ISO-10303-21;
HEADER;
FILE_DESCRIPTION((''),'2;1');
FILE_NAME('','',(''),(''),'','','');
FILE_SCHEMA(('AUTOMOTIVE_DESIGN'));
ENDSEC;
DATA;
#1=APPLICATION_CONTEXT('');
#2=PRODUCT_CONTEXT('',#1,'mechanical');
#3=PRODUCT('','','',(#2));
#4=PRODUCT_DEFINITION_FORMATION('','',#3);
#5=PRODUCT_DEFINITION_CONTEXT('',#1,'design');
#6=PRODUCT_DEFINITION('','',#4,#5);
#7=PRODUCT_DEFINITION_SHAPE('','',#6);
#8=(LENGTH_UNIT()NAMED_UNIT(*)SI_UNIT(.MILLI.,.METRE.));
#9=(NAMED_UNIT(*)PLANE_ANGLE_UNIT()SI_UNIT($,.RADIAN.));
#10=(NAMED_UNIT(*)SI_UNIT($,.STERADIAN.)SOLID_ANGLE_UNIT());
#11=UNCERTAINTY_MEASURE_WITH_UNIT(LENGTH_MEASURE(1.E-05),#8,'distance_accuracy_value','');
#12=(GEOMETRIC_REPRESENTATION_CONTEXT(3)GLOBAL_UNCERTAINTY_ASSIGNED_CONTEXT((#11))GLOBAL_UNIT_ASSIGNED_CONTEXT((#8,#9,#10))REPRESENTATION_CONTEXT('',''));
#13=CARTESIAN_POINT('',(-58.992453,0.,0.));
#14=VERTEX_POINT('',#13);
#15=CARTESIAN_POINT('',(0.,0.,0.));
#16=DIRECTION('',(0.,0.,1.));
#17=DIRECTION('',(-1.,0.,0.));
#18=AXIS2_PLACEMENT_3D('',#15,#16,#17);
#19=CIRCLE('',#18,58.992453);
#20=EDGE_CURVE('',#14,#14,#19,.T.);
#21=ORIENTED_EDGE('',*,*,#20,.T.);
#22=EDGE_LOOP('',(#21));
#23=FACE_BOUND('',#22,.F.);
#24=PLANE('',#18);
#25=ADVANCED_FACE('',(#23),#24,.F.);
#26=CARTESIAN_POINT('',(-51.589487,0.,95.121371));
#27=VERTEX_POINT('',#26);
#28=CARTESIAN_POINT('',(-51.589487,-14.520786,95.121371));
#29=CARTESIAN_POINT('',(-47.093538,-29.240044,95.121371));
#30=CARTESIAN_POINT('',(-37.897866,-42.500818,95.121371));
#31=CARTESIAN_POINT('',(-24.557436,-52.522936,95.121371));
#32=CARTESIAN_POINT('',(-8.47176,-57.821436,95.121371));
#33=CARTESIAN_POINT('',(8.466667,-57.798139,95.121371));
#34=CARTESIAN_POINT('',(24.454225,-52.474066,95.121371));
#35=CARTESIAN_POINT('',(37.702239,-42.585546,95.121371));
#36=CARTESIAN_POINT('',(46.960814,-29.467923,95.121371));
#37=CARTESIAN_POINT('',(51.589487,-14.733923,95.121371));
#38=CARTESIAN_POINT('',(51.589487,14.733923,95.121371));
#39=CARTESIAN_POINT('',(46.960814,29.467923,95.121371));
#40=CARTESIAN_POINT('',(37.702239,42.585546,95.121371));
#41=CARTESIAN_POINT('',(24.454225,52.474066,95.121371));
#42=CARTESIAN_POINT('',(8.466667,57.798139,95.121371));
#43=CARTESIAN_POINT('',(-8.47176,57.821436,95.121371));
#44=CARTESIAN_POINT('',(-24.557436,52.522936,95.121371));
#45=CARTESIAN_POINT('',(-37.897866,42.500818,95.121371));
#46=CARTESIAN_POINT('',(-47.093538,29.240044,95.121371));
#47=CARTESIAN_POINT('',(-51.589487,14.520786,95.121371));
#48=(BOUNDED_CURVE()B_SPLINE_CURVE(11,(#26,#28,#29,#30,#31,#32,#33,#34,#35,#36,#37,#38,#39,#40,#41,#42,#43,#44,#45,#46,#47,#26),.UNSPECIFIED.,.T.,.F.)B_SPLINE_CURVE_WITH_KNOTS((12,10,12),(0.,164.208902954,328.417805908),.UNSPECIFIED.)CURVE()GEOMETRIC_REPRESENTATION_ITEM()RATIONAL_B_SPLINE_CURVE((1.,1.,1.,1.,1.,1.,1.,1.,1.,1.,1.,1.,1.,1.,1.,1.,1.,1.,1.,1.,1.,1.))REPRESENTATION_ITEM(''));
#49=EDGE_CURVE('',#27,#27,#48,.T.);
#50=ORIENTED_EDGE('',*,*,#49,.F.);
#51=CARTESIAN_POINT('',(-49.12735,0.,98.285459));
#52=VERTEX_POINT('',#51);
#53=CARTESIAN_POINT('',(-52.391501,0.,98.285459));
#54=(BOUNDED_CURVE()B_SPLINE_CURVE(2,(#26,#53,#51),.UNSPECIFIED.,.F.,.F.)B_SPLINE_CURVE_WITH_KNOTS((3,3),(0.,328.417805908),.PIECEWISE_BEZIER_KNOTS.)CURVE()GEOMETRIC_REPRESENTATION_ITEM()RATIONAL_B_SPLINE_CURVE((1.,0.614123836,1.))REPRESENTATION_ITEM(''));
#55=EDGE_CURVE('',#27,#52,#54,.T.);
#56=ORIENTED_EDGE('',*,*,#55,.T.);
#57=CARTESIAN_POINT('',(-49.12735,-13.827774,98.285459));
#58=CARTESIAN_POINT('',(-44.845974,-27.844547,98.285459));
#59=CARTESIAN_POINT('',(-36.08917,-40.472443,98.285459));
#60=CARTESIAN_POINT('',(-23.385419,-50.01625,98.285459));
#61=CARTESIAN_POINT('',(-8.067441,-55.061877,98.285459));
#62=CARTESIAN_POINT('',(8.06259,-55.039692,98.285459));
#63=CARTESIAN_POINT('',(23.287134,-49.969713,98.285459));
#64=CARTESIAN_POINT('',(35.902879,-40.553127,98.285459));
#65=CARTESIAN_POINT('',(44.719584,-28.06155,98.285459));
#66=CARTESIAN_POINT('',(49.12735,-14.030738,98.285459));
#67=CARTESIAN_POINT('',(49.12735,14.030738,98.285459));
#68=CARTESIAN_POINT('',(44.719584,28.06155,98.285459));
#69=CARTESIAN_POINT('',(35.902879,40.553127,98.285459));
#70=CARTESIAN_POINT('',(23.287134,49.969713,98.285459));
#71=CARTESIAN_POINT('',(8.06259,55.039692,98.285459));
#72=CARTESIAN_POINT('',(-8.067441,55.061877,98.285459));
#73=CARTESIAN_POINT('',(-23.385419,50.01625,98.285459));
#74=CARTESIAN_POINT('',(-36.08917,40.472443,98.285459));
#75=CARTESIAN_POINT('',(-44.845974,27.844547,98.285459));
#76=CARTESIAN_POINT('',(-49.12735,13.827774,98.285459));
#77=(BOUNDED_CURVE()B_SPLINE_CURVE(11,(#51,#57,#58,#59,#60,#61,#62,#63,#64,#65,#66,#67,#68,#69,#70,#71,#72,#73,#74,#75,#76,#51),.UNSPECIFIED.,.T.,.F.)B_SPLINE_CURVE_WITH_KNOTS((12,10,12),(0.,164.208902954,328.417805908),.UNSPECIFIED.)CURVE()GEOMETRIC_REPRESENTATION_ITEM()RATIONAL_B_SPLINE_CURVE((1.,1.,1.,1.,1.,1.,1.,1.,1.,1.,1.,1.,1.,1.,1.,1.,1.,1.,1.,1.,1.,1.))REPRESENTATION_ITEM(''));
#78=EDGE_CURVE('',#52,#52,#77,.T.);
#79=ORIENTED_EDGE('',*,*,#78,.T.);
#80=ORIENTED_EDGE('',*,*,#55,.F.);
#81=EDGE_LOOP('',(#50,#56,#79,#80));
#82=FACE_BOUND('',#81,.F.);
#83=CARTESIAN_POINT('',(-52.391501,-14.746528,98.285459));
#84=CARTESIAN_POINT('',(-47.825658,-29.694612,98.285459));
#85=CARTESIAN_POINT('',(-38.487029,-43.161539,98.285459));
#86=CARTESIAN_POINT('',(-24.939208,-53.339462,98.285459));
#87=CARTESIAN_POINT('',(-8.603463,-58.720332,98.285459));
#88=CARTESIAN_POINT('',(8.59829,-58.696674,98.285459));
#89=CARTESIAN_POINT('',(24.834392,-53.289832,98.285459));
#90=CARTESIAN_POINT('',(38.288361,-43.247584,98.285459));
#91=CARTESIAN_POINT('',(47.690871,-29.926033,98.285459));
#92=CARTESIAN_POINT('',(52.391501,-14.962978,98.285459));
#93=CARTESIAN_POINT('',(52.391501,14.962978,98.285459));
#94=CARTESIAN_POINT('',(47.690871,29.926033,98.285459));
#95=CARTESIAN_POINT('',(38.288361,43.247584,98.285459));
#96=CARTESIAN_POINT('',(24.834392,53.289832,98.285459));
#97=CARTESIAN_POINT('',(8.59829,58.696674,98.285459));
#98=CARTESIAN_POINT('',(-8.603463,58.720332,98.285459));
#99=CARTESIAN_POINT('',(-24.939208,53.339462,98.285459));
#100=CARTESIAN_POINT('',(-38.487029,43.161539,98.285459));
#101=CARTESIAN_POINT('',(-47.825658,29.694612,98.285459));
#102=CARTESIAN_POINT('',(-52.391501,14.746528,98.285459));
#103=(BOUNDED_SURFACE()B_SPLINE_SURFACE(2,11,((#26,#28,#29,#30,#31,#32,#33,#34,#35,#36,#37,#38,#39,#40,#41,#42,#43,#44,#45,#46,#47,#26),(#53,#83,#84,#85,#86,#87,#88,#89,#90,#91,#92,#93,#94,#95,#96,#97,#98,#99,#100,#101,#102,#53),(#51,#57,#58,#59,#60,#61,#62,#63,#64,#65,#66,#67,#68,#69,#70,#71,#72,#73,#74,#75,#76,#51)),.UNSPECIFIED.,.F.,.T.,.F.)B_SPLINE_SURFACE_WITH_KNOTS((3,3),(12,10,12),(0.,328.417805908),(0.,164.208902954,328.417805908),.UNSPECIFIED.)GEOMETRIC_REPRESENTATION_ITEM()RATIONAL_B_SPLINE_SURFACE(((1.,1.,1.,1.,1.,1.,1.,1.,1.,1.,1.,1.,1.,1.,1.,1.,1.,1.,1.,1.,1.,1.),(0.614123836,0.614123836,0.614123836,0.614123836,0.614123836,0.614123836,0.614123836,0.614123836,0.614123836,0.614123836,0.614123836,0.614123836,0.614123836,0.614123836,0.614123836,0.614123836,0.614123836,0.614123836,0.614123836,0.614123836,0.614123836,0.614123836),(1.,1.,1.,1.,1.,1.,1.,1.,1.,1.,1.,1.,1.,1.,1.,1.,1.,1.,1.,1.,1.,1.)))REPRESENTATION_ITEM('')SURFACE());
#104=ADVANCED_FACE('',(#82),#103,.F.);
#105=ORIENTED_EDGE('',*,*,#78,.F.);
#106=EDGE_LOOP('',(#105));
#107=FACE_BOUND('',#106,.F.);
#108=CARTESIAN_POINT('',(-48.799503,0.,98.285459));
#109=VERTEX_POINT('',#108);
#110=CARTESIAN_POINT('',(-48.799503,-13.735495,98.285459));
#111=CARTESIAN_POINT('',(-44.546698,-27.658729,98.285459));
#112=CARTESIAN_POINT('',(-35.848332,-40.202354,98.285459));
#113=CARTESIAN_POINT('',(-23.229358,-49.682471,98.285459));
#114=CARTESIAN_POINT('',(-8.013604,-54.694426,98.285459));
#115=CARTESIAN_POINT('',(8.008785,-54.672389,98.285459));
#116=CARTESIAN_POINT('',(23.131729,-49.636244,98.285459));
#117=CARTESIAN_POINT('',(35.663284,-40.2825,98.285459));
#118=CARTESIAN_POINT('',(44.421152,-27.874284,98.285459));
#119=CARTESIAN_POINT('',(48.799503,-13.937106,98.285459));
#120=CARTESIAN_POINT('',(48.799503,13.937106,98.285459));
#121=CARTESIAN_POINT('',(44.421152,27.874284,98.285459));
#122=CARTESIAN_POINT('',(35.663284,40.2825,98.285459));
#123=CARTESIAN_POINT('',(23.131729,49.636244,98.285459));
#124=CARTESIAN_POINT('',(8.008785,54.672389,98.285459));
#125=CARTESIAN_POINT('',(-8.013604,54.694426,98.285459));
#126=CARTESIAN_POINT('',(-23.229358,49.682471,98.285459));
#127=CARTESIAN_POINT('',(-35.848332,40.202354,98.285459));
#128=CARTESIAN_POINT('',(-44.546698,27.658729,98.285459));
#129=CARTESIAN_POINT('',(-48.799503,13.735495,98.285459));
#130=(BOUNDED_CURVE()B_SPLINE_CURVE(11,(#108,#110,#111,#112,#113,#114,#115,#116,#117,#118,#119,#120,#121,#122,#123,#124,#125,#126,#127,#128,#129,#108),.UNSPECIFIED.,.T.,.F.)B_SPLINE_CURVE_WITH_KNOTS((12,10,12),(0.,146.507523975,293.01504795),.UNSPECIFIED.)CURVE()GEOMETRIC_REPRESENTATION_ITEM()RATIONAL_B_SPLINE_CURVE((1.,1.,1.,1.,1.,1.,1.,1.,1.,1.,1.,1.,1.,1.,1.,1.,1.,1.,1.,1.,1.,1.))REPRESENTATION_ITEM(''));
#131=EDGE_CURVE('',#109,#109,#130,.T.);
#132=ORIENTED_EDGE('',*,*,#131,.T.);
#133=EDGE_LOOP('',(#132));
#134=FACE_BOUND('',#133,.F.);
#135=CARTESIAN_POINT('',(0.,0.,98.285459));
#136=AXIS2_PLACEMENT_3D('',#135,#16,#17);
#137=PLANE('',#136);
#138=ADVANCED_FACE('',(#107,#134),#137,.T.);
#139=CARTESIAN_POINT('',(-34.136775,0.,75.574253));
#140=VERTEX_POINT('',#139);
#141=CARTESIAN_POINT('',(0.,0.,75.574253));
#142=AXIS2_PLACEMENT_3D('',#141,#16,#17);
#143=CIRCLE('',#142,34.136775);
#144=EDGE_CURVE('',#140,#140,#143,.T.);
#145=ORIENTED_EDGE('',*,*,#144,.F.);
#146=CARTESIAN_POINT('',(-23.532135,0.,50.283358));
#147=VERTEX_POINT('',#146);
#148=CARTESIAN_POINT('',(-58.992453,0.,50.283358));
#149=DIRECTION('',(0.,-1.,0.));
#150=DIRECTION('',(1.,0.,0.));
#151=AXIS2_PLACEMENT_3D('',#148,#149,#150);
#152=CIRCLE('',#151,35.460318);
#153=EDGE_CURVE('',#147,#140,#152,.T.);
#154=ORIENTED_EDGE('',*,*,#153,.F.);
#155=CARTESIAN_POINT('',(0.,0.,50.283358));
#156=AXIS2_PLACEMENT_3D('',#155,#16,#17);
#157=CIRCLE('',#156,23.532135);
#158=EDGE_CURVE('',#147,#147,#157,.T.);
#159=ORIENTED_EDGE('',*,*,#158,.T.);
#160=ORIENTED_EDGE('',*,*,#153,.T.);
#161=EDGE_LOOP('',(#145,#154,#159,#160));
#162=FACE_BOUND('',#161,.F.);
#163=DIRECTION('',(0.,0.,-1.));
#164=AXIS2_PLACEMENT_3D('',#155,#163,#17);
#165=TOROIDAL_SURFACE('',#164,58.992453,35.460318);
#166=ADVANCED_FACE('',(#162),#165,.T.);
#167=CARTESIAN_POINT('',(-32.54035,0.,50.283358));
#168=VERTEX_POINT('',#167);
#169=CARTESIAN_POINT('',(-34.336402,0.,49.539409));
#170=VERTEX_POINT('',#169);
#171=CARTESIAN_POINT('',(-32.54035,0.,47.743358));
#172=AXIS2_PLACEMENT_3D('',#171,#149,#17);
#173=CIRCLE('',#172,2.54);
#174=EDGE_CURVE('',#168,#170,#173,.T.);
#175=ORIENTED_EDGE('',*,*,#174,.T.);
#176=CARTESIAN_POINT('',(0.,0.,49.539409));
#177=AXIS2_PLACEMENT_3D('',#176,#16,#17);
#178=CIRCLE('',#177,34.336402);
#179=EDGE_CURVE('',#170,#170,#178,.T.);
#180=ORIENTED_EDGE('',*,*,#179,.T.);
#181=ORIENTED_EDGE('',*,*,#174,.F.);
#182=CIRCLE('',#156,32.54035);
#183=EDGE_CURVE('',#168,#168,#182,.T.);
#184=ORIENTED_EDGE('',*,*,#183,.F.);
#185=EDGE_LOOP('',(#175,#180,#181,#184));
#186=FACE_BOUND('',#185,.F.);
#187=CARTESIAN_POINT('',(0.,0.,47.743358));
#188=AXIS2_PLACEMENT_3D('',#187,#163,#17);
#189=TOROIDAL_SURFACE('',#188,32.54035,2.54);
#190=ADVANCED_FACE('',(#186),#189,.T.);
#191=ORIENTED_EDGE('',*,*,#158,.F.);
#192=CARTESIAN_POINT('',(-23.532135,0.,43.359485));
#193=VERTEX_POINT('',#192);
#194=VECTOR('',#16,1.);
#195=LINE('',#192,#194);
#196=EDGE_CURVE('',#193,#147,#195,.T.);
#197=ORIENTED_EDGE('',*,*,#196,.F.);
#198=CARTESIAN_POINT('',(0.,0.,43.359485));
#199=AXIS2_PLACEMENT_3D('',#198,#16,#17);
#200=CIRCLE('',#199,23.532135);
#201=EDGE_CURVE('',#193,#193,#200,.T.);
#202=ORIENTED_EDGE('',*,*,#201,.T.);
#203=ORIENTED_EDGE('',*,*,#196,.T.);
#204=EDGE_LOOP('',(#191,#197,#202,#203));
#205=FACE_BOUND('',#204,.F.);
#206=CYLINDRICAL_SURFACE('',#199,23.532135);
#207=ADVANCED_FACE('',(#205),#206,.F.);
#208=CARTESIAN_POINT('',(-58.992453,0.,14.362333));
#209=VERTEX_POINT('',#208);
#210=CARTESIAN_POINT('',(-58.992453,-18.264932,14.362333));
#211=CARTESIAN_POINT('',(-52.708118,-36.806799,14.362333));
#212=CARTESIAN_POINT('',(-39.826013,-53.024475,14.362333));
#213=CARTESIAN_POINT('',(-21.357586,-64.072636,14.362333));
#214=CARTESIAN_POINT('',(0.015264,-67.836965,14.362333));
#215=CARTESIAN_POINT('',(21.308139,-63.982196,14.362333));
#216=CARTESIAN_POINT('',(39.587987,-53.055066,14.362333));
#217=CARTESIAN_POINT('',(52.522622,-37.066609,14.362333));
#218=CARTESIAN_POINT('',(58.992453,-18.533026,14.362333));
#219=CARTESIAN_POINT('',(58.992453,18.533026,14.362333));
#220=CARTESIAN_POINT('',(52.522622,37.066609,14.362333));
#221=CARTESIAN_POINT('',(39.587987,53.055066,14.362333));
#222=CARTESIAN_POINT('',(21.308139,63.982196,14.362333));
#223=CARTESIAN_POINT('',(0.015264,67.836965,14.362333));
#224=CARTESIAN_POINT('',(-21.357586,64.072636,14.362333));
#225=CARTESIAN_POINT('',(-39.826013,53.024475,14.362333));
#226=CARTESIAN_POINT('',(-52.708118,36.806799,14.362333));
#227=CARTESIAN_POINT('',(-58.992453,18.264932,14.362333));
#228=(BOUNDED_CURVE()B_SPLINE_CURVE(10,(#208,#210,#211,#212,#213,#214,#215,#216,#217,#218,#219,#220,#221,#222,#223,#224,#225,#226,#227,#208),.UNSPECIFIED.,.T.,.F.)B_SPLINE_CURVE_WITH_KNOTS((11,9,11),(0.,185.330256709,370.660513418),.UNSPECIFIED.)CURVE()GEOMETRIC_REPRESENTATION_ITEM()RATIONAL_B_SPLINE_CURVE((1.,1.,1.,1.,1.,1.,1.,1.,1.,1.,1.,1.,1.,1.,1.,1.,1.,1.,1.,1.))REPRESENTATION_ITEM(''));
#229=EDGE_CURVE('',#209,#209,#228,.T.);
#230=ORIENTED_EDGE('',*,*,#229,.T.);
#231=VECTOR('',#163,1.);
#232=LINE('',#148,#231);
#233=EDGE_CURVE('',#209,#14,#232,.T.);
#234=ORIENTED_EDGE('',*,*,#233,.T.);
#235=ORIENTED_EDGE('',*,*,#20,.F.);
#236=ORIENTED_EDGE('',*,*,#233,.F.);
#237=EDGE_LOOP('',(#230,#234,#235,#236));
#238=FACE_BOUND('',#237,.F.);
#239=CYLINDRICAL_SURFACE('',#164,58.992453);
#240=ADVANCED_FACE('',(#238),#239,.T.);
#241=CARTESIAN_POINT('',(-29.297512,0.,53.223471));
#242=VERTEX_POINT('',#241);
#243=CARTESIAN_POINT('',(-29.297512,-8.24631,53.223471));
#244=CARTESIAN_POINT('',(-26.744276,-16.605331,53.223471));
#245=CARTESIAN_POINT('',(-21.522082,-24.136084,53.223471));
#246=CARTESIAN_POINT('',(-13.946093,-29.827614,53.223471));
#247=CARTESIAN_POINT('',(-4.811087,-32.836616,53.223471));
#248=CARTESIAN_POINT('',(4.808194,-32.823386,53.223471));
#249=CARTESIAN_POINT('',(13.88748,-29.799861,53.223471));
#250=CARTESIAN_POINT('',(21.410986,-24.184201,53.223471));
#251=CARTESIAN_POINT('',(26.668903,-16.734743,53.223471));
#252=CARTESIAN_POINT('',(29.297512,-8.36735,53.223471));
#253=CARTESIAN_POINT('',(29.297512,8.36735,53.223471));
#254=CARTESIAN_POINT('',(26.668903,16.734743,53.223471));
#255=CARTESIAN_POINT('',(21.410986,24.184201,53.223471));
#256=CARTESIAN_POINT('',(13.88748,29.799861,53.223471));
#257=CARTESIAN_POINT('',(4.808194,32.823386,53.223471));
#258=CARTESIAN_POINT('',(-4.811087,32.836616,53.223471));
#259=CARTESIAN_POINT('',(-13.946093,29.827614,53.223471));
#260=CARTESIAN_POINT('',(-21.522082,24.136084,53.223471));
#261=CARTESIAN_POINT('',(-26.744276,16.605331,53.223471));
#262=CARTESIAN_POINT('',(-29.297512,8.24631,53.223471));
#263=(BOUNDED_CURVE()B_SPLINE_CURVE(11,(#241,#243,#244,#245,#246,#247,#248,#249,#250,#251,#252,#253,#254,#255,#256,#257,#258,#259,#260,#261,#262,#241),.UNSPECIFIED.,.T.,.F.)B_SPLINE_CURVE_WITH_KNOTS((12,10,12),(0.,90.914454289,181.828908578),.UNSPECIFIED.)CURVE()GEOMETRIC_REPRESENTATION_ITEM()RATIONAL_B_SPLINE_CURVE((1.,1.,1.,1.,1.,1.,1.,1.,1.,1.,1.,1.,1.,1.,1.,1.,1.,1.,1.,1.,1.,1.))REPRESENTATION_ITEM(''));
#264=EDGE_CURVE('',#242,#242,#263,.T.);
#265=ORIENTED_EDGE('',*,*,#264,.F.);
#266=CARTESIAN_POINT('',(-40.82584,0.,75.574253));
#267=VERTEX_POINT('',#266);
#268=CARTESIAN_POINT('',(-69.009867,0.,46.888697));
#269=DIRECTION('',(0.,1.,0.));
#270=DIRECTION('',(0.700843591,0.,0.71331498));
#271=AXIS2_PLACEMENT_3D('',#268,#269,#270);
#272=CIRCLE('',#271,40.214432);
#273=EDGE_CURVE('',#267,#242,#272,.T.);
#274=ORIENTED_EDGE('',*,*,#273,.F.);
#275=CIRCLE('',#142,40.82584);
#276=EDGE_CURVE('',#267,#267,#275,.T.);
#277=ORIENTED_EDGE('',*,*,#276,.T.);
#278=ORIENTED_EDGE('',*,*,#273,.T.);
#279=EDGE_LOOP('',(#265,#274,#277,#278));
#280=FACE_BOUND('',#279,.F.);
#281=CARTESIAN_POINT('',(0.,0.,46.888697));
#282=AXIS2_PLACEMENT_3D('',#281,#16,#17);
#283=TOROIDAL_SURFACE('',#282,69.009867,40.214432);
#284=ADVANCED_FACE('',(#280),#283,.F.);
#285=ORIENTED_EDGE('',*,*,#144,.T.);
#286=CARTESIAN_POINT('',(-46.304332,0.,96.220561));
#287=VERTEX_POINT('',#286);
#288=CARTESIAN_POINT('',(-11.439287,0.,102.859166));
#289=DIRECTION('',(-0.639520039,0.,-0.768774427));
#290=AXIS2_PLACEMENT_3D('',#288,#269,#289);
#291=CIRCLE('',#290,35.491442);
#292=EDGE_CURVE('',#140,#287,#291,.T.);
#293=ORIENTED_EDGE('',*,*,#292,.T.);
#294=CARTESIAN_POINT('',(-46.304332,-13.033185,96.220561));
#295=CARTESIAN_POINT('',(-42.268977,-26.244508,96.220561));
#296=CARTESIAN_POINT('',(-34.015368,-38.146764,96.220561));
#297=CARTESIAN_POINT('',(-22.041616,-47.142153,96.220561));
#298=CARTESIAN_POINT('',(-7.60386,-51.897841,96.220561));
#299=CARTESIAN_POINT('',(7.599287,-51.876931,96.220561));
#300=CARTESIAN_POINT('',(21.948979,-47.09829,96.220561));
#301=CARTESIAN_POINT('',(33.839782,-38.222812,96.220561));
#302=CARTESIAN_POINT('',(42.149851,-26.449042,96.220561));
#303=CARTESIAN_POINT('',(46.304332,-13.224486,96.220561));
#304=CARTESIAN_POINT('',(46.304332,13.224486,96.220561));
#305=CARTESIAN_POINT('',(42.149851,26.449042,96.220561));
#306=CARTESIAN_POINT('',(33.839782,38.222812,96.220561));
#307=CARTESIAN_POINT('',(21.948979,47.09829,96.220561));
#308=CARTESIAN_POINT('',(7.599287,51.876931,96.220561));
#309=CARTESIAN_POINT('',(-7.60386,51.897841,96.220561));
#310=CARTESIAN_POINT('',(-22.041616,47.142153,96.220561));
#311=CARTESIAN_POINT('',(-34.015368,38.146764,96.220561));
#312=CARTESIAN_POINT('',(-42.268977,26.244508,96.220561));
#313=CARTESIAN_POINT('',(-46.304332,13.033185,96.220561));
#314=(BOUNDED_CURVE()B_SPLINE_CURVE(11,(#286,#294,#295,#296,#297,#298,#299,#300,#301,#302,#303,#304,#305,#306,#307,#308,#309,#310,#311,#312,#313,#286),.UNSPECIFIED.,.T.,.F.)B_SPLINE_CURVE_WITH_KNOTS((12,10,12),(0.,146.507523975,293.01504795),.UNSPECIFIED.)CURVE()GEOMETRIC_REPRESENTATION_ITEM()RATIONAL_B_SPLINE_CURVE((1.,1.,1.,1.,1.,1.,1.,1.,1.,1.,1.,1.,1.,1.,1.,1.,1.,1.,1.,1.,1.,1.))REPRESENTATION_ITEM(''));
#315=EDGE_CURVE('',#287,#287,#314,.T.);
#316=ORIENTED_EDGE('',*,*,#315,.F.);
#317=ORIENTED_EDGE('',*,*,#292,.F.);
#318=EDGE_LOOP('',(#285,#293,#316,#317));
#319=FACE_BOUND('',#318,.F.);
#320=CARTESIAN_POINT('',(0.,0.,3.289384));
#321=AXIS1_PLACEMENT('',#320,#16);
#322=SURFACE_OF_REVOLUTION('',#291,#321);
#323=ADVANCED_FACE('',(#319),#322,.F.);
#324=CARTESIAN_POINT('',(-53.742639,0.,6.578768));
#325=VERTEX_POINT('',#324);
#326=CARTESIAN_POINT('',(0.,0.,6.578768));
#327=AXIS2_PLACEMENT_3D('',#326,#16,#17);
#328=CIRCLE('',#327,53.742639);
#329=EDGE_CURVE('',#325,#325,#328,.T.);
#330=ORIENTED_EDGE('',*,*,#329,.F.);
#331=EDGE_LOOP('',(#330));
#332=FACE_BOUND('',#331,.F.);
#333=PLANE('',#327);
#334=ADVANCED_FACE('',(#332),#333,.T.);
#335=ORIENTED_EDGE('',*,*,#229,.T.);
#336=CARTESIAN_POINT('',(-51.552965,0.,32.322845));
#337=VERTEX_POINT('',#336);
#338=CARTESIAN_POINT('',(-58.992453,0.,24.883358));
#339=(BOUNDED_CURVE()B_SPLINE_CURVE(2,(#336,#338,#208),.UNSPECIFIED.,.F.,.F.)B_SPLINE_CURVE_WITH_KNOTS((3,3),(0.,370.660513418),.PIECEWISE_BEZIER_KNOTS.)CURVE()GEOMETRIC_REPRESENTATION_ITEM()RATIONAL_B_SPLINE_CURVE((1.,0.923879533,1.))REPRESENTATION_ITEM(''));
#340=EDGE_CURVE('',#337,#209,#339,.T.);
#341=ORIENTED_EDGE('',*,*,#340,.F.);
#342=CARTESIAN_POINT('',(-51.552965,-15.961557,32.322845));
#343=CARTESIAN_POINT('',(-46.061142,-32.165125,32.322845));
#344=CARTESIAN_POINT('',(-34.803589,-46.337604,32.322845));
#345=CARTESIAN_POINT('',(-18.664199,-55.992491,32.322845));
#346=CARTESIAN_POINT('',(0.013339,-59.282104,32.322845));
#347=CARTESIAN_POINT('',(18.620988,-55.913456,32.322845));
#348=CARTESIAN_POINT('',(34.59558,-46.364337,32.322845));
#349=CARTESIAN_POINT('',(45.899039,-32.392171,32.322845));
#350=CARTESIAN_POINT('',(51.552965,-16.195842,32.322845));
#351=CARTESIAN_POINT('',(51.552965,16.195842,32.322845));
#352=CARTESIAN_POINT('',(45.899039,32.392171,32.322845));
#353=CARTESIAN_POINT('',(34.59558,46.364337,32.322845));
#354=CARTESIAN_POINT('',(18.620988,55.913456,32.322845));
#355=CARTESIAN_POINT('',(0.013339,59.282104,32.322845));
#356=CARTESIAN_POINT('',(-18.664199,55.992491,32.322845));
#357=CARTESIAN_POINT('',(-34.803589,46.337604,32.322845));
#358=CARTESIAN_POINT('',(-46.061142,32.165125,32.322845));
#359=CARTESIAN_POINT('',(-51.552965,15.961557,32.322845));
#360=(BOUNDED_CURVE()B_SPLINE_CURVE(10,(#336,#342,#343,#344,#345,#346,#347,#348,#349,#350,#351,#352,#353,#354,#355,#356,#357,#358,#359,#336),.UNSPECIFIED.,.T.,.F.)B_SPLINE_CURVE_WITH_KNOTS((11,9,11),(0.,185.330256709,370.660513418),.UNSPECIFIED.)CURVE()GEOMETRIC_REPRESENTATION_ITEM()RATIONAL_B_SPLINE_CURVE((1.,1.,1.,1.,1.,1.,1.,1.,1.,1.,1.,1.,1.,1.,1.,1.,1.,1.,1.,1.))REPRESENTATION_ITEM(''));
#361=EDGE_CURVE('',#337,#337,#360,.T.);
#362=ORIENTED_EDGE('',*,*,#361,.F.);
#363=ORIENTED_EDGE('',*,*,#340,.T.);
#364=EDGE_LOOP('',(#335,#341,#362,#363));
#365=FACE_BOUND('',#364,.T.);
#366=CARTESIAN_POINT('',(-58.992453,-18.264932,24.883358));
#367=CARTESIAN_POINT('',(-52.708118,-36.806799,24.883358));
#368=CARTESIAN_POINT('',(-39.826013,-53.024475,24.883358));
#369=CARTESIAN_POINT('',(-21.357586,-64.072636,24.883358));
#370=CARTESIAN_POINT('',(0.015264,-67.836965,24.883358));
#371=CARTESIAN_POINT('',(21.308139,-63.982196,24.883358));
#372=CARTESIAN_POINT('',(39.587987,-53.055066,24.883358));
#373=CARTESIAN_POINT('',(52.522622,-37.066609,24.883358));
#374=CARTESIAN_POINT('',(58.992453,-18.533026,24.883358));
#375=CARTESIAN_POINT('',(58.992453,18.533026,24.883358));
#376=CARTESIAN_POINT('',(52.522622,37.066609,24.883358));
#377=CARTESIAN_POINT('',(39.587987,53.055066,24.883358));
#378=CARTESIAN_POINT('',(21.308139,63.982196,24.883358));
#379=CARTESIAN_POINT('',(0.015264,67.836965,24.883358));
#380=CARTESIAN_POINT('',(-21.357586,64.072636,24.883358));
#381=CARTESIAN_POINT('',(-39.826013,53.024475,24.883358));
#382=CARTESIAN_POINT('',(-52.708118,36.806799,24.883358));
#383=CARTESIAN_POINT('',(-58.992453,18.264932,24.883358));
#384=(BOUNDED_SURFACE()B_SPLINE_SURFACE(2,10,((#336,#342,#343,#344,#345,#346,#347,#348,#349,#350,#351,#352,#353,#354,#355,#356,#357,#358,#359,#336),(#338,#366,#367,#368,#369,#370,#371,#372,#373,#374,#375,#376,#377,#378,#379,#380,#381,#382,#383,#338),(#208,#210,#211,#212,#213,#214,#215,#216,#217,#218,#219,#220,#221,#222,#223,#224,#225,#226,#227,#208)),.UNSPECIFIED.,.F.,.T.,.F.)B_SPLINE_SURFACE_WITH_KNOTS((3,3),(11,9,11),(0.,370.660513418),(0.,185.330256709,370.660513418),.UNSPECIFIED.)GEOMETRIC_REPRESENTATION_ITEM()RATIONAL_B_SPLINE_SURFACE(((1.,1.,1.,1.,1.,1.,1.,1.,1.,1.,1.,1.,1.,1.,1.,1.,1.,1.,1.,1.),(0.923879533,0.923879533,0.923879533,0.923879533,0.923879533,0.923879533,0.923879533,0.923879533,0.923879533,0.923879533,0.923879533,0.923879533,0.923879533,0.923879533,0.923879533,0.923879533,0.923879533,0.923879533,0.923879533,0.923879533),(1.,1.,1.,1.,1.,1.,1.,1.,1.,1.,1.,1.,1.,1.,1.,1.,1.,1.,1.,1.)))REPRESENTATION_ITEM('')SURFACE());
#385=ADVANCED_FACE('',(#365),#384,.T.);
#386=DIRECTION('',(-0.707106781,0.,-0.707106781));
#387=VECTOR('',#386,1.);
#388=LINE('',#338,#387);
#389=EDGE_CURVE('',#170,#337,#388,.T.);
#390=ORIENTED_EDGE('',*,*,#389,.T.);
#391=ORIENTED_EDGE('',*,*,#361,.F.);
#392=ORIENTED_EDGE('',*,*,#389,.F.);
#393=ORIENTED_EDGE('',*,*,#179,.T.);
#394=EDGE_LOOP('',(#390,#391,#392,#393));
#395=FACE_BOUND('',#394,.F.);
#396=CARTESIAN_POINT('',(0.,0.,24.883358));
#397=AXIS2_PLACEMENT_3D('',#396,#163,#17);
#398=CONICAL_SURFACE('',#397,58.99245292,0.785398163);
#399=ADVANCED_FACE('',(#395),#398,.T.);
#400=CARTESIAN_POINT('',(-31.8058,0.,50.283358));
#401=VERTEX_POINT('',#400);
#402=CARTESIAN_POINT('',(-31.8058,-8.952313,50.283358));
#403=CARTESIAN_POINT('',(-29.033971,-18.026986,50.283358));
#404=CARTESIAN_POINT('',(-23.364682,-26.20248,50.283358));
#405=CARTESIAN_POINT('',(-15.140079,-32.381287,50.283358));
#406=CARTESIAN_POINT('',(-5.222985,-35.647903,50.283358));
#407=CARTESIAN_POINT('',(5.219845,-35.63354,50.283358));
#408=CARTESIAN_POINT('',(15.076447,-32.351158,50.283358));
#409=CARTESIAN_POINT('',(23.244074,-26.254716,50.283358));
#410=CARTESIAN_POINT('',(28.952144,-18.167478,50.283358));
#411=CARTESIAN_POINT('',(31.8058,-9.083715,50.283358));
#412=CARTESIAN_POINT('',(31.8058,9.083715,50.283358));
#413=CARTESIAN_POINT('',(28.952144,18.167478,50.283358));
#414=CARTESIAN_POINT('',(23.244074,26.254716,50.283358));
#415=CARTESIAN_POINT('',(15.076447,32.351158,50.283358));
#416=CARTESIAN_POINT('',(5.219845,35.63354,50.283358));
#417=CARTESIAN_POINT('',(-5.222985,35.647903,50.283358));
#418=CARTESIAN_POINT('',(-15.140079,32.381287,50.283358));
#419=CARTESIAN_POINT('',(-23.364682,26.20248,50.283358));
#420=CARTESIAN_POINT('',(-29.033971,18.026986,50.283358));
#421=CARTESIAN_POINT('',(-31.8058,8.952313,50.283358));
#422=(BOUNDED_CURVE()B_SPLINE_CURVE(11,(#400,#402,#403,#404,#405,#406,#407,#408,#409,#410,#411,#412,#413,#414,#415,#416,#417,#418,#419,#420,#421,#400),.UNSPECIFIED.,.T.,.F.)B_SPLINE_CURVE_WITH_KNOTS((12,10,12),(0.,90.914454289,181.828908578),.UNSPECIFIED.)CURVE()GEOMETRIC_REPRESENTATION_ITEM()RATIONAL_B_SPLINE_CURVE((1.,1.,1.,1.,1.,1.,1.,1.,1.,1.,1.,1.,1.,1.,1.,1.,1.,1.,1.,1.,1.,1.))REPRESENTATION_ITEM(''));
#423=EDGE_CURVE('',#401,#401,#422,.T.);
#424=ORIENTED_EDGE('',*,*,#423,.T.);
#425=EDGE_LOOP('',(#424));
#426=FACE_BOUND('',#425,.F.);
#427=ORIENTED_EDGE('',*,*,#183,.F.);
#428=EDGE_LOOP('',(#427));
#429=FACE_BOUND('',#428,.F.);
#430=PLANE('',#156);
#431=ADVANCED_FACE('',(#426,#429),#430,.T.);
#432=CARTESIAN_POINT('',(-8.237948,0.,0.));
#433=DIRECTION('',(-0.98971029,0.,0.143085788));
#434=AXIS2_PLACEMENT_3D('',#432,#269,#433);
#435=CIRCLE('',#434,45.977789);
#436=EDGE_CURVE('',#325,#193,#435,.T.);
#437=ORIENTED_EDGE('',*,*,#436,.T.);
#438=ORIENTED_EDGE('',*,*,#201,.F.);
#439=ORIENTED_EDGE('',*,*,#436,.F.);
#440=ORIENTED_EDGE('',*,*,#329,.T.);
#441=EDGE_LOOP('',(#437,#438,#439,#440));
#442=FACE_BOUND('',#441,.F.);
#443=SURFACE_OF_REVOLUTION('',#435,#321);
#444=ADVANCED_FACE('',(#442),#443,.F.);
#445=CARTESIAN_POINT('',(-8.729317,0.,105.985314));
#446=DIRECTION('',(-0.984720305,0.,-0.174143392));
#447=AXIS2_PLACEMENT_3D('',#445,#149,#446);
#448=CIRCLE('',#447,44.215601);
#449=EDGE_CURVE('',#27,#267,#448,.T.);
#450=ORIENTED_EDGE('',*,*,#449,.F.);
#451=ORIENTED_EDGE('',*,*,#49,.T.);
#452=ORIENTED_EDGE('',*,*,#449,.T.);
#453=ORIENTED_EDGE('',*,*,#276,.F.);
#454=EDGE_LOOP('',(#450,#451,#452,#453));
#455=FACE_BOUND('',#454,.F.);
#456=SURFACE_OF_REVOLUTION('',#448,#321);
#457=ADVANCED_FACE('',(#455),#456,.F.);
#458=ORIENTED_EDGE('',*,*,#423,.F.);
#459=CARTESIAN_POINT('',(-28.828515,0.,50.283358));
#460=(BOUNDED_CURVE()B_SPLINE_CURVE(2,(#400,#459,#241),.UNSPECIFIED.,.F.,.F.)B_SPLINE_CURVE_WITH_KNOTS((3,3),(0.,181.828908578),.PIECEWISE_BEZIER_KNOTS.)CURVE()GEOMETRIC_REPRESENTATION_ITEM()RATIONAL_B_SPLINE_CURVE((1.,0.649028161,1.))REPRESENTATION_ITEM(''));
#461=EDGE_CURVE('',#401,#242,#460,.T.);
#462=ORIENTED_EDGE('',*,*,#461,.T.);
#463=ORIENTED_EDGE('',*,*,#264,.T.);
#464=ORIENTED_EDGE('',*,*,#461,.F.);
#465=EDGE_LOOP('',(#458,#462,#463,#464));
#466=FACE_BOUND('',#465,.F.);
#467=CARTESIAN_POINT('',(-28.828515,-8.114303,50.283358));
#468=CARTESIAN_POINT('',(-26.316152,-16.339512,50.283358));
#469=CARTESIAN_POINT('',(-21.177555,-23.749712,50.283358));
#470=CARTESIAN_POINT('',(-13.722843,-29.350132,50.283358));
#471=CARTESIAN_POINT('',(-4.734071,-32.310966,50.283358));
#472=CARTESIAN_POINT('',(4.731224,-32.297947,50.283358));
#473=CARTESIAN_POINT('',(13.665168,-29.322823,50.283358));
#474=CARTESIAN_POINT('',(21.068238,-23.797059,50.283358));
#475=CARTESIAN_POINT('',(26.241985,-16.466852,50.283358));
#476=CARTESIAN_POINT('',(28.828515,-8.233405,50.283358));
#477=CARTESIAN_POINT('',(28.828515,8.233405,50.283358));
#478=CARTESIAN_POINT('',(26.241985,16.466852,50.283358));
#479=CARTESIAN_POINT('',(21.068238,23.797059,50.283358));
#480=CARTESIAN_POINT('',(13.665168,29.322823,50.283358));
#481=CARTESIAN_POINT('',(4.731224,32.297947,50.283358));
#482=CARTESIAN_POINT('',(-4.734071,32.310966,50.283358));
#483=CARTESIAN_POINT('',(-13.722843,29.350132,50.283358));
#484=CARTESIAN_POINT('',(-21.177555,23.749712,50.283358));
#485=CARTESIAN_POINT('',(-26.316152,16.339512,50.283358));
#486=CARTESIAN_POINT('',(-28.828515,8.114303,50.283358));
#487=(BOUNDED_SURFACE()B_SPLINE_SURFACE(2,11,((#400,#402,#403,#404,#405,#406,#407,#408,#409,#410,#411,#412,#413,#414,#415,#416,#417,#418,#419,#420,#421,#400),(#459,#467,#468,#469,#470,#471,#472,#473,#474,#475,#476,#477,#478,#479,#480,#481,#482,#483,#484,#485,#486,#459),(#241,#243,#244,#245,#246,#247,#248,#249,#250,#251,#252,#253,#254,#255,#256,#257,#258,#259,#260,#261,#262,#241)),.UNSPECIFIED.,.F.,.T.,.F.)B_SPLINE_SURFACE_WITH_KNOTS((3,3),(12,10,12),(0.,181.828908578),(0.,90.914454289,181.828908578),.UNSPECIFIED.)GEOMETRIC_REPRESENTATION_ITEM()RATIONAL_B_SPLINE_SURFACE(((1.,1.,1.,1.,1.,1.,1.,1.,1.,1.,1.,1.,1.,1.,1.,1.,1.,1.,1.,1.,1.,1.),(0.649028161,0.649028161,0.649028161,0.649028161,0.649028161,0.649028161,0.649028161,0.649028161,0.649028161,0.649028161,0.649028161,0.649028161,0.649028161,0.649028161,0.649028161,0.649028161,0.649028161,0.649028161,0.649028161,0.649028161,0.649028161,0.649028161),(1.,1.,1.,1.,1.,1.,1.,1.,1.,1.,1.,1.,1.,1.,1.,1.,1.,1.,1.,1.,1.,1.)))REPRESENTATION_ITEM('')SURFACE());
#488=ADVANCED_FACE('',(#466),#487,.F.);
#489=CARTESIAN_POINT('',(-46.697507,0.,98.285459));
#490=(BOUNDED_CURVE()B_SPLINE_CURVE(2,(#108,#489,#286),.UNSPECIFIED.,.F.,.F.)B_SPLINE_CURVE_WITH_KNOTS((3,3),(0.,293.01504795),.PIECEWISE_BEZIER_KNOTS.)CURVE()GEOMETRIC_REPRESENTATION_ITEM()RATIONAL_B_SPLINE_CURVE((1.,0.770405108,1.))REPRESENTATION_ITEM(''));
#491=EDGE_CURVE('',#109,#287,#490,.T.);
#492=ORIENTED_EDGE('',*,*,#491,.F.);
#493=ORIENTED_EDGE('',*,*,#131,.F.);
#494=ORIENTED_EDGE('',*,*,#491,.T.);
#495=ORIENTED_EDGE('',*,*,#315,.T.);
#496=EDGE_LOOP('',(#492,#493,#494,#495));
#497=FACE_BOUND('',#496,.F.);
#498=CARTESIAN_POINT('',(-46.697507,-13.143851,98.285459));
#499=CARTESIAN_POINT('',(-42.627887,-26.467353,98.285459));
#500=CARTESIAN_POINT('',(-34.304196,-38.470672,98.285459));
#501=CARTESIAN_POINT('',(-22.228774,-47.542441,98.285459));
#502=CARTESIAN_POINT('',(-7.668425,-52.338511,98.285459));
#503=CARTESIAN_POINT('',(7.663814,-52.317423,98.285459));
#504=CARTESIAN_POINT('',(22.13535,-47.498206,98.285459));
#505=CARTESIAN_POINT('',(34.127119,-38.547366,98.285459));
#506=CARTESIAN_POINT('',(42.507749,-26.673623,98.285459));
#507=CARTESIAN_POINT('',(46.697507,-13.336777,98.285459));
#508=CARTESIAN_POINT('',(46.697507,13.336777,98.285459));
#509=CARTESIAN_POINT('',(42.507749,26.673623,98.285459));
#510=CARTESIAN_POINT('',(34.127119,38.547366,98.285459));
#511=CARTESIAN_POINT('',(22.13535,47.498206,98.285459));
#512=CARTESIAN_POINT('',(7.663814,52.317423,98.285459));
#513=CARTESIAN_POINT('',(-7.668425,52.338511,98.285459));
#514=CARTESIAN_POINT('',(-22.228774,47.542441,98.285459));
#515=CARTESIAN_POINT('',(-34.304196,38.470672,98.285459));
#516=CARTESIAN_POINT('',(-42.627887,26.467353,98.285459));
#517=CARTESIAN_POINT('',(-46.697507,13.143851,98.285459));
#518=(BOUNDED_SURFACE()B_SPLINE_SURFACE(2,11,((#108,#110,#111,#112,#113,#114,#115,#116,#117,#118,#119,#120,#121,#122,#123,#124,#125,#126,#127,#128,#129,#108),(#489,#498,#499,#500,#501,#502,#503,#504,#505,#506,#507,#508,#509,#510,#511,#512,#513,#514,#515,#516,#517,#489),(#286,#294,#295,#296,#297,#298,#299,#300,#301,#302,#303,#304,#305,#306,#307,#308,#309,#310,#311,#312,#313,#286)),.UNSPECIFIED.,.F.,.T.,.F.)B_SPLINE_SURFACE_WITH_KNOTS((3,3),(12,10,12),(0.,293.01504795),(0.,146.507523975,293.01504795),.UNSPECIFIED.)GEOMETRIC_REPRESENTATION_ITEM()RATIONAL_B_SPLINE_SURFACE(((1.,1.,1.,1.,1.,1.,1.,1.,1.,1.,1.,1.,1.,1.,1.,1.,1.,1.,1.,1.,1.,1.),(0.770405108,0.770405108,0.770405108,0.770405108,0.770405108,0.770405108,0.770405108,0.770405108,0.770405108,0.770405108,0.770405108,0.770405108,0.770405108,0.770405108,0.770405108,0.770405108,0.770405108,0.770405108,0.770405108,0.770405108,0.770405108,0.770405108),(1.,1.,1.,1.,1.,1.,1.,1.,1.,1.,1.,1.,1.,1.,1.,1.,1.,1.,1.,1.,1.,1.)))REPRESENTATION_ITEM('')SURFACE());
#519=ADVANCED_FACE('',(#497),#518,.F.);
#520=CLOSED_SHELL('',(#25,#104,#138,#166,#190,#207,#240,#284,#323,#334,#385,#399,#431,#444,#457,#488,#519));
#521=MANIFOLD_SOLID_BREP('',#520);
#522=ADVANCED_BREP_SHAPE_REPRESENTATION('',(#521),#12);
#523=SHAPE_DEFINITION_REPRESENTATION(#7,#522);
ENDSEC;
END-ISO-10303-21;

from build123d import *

# Parameters (mm, degrees)
F2_SIZE = 25.4
F3_R    = 2.54
F4_R    = 2.54
F5_R    = 25.4


with BuildPart() as f1:
    # F0 (on Front) → F1 (revolve)
    with BuildSketch(Plane.XZ):
        with BuildLine():
            Line((-54.2157366872, 0), (0, 0))
            Line((0, 0), (0, 6.5787681378))
            Line((0, 6.5787681378), (-53.7426385557, 6.5787681378))
            ThreePointArc((-53.7426385557, 6.5787681378), (-43.7672480582, 29.182630018), (-23.5321354121, 43.3594845235))
            Line((-23.5321354121, 43.3594845235), (-23.5321354121, 50.283357501))
            Line((-23.5321354121, 50.283357501), (-28.9389695972, 50.283357501))
            Line((-28.9389695972, 50.283357501), (-58.9924529195, 50.283357501))
            Line((-58.9924529195, 50.283357501), (-58.9924529195, 43.3594845235))
            Line((-58.9924529195, 43.3594845235), (-58.9924529195, 6.5787681378))
            Line((-58.9924529195, 6.5787681378), (-58.9924529195, 0))
            Line((-58.9924529195, 0), (-54.2157366872, 0))
        make_face()
        with BuildLine():
            Line((-28.9389695972, 50.283357501), (-23.5321354121, 50.283357501))
            ThreePointArc((-23.5321354121, 50.283357501), (-26.2905849886, 63.9954671693), (-34.1367754588, 75.5742534064))
            ThreePointArc((-34.1367754588, 75.5742534064), (-42.5334894353, 85.7479701823), (-46.6347932816, 98.285458982))
            Line((-46.6347932816, 98.285458982), (-52.2693172097, 98.285458982))
            ThreePointArc((-52.2693172097, 98.285458982), (-48.2156517017, 86.0893655487), (-40.8258400857, 75.5742534064))
            ThreePointArc((-40.8258400857, 75.5742534064), (-32.6149356607, 63.9945293644), (-28.9389695972, 50.283357501))
        make_face()
    revolve(axis=Axis((0, 0, 3.2893840689), (0, 0, 1)))

    # F2
    f2_edges = [f1.edges().sort_by_distance(p)[0] for p in [
        (58.992453, 0, 50.283358),
    ]]
    chamfer(f2_edges, length=F2_SIZE)

    # F3
    f3_edges = [f1.edges().sort_by_distance(p)[0] for p in [
        (33.592453, 0, 50.283358),
        (28.93897, 0, 50.283358),
    ]]
    fillet(f3_edges, radius=F3_R)

    # F4
    f4_edges = [f1.edges().sort_by_distance(p)[0] for p in [
        (46.634793, 0, 98.285459),
        (52.269317, 0, 98.285459),
    ]]
    fillet(f4_edges, radius=F4_R)

    # F5
    f5_edges = [f1.edges().sort_by_distance(p)[0] for p in [
        (58.992453, 0, 24.883358),
    ]]
    fillet(f5_edges, radius=F5_R)


solid = f1.part
